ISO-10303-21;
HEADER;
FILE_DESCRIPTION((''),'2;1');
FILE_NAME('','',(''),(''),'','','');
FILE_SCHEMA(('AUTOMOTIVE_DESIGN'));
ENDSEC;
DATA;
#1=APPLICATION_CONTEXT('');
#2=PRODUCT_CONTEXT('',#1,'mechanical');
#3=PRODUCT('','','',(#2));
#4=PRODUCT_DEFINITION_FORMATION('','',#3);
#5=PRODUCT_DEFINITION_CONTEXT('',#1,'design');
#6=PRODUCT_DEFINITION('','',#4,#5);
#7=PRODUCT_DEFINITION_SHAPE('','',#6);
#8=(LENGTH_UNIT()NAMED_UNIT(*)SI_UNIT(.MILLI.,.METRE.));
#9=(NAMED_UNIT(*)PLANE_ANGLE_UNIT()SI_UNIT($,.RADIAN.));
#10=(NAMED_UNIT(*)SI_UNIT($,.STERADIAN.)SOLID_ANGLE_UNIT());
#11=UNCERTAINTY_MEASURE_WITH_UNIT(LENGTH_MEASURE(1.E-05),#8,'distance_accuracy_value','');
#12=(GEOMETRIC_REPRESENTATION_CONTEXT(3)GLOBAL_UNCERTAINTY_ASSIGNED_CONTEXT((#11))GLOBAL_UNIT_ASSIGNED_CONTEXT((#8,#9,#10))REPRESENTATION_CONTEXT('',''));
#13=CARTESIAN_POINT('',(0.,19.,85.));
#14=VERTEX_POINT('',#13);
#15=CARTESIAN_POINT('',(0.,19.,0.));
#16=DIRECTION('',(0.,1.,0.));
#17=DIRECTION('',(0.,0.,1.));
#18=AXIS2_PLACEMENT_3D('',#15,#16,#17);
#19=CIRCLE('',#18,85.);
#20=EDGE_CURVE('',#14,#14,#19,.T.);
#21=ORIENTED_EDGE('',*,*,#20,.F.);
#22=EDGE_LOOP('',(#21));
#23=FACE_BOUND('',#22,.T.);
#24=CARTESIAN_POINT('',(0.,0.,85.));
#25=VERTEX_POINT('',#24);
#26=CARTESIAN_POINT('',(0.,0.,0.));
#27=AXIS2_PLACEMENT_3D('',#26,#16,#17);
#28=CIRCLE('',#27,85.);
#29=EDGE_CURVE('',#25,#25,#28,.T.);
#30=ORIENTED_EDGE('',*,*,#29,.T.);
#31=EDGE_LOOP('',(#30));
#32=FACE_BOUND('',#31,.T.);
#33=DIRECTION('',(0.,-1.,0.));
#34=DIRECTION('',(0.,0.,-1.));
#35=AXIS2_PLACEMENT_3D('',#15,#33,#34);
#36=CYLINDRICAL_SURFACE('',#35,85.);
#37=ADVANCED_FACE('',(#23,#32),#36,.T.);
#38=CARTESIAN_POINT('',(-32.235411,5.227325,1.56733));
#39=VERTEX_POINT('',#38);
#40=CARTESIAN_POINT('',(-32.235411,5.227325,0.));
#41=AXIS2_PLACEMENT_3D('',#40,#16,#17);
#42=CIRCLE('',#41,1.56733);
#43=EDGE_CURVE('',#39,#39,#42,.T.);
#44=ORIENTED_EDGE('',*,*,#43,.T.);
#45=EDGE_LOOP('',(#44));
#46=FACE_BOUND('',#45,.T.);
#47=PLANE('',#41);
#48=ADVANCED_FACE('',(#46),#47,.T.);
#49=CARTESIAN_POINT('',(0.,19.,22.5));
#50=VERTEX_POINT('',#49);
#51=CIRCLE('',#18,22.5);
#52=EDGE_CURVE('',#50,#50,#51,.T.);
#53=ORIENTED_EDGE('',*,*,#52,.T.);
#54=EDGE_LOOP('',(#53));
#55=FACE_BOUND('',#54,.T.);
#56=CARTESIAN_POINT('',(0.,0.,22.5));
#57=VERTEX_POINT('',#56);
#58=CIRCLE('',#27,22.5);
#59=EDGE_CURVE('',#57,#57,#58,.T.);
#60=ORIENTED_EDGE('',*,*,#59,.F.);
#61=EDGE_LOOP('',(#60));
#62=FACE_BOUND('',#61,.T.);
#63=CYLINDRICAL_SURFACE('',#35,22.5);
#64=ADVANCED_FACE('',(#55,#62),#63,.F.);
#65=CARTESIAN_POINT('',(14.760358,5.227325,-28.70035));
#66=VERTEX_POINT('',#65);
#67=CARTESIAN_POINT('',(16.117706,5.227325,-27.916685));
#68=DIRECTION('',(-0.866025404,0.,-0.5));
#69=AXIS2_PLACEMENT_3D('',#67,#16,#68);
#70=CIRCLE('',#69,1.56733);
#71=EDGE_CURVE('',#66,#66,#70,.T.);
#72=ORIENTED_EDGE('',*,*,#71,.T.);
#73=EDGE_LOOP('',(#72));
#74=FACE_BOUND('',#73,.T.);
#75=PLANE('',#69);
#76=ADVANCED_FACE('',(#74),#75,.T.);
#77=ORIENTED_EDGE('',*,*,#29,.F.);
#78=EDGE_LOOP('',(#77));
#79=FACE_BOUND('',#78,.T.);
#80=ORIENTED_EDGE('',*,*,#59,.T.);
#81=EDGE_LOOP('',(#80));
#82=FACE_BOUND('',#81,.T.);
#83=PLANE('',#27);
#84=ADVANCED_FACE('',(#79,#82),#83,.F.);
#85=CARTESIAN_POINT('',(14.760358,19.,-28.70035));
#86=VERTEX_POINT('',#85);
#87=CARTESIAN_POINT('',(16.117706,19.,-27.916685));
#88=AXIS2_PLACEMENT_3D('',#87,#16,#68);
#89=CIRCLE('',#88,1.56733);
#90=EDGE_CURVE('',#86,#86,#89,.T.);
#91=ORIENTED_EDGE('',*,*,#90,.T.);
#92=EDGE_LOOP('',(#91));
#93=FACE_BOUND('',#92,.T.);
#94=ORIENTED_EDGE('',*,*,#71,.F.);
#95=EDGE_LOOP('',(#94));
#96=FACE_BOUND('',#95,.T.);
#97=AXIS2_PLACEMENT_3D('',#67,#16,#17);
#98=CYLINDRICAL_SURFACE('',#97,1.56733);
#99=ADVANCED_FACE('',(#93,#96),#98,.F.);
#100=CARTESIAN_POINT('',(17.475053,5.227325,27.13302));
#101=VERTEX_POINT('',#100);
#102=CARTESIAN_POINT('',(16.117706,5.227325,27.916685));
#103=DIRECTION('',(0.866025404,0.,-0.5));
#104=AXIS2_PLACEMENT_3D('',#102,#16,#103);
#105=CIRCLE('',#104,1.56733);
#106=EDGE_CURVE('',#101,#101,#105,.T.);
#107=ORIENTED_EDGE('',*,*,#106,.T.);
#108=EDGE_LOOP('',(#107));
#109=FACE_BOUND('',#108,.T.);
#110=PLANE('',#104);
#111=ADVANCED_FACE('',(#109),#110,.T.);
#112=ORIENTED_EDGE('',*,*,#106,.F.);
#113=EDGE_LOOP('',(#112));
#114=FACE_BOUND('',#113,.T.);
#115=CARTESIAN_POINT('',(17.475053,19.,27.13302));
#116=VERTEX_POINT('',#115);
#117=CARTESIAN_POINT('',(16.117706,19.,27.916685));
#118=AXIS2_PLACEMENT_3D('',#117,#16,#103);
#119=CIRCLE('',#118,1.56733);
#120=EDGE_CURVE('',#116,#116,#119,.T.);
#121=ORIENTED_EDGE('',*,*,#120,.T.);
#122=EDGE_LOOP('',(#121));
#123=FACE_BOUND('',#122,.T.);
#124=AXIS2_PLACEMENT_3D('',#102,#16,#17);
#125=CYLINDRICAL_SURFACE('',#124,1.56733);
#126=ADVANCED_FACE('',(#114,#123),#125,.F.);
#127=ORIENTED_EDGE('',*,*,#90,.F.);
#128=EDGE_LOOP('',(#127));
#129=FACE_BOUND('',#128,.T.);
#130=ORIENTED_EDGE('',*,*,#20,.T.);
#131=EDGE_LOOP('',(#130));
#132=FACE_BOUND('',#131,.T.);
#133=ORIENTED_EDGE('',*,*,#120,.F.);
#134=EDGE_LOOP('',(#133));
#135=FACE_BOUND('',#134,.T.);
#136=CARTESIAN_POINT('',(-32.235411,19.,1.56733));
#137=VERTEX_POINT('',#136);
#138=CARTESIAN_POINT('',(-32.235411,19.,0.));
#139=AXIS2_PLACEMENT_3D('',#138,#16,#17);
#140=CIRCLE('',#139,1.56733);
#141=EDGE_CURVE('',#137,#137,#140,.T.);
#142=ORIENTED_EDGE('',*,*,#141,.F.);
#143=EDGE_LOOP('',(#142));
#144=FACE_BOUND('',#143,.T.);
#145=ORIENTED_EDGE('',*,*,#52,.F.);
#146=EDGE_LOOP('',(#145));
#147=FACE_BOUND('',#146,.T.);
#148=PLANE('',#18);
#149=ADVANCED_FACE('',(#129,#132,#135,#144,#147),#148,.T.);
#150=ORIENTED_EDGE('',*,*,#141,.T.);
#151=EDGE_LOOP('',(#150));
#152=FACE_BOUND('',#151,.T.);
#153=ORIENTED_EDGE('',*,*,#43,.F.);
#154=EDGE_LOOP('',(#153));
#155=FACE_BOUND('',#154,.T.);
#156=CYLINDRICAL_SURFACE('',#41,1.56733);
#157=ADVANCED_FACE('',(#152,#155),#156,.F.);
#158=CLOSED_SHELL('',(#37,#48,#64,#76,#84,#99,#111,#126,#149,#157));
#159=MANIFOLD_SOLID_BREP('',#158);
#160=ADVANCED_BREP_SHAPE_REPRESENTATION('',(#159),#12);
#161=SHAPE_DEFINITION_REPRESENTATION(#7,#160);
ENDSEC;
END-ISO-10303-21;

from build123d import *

# Parameters (mm, degrees)
SKETCH1_R           = 85
BOSS_EXTRUDE1_DEPTH = 19
SKETCH2_R           = 22.5
CUT_EXTRUDE1_DEPTH  = 122.70045193
SKETCH3_R           = 1.567329789
CUT_EXTRUDE2_DEPTH  = 13.772674953
CIRPATTERN1_COUNT   = 3


with BuildPart() as part:
    # Sketch1 → Boss-Extrude1 (new body)
    with BuildSketch(Plane(origin=(0, 0, 0), x_dir=(1, 0, 0), z_dir=(0, 1, 0))):
        Circle(SKETCH1_R)
    extrude(amount=BOSS_EXTRUDE1_DEPTH)

    # Sketch2 → Cut-Extrude1 (cut, through all)
    with BuildSketch(Plane(origin=(0, 0, 0), x_dir=(1, 0, 0), z_dir=(0, 1, 0))):
        Circle(SKETCH2_R)
    extrude(amount=CUT_EXTRUDE1_DEPTH, mode=Mode.SUBTRACT)

    # Sketch3 → Cut-Extrude2 (cut)
    with BuildSketch(Plane(origin=(0, 19, 0), x_dir=(1, 0, 0), z_dir=(0, 1, 0))):
        with Locations((-32.23541133, 0)):
            Circle(SKETCH3_R)
    cut_extrude2 = extrude(amount=-CUT_EXTRUDE2_DEPTH, mode=Mode.SUBTRACT)

    # CirPattern1: Cut-Extrude2 ×3 about axis
    cirpattern1_axis = Axis((0, 0, 0), (0, 1, 0))
    for i in range(1, CIRPATTERN1_COUNT):
        add(cut_extrude2.rotate(cirpattern1_axis, i * 360 / CIRPATTERN1_COUNT), mode=Mode.SUBTRACT)


solid = part.part
